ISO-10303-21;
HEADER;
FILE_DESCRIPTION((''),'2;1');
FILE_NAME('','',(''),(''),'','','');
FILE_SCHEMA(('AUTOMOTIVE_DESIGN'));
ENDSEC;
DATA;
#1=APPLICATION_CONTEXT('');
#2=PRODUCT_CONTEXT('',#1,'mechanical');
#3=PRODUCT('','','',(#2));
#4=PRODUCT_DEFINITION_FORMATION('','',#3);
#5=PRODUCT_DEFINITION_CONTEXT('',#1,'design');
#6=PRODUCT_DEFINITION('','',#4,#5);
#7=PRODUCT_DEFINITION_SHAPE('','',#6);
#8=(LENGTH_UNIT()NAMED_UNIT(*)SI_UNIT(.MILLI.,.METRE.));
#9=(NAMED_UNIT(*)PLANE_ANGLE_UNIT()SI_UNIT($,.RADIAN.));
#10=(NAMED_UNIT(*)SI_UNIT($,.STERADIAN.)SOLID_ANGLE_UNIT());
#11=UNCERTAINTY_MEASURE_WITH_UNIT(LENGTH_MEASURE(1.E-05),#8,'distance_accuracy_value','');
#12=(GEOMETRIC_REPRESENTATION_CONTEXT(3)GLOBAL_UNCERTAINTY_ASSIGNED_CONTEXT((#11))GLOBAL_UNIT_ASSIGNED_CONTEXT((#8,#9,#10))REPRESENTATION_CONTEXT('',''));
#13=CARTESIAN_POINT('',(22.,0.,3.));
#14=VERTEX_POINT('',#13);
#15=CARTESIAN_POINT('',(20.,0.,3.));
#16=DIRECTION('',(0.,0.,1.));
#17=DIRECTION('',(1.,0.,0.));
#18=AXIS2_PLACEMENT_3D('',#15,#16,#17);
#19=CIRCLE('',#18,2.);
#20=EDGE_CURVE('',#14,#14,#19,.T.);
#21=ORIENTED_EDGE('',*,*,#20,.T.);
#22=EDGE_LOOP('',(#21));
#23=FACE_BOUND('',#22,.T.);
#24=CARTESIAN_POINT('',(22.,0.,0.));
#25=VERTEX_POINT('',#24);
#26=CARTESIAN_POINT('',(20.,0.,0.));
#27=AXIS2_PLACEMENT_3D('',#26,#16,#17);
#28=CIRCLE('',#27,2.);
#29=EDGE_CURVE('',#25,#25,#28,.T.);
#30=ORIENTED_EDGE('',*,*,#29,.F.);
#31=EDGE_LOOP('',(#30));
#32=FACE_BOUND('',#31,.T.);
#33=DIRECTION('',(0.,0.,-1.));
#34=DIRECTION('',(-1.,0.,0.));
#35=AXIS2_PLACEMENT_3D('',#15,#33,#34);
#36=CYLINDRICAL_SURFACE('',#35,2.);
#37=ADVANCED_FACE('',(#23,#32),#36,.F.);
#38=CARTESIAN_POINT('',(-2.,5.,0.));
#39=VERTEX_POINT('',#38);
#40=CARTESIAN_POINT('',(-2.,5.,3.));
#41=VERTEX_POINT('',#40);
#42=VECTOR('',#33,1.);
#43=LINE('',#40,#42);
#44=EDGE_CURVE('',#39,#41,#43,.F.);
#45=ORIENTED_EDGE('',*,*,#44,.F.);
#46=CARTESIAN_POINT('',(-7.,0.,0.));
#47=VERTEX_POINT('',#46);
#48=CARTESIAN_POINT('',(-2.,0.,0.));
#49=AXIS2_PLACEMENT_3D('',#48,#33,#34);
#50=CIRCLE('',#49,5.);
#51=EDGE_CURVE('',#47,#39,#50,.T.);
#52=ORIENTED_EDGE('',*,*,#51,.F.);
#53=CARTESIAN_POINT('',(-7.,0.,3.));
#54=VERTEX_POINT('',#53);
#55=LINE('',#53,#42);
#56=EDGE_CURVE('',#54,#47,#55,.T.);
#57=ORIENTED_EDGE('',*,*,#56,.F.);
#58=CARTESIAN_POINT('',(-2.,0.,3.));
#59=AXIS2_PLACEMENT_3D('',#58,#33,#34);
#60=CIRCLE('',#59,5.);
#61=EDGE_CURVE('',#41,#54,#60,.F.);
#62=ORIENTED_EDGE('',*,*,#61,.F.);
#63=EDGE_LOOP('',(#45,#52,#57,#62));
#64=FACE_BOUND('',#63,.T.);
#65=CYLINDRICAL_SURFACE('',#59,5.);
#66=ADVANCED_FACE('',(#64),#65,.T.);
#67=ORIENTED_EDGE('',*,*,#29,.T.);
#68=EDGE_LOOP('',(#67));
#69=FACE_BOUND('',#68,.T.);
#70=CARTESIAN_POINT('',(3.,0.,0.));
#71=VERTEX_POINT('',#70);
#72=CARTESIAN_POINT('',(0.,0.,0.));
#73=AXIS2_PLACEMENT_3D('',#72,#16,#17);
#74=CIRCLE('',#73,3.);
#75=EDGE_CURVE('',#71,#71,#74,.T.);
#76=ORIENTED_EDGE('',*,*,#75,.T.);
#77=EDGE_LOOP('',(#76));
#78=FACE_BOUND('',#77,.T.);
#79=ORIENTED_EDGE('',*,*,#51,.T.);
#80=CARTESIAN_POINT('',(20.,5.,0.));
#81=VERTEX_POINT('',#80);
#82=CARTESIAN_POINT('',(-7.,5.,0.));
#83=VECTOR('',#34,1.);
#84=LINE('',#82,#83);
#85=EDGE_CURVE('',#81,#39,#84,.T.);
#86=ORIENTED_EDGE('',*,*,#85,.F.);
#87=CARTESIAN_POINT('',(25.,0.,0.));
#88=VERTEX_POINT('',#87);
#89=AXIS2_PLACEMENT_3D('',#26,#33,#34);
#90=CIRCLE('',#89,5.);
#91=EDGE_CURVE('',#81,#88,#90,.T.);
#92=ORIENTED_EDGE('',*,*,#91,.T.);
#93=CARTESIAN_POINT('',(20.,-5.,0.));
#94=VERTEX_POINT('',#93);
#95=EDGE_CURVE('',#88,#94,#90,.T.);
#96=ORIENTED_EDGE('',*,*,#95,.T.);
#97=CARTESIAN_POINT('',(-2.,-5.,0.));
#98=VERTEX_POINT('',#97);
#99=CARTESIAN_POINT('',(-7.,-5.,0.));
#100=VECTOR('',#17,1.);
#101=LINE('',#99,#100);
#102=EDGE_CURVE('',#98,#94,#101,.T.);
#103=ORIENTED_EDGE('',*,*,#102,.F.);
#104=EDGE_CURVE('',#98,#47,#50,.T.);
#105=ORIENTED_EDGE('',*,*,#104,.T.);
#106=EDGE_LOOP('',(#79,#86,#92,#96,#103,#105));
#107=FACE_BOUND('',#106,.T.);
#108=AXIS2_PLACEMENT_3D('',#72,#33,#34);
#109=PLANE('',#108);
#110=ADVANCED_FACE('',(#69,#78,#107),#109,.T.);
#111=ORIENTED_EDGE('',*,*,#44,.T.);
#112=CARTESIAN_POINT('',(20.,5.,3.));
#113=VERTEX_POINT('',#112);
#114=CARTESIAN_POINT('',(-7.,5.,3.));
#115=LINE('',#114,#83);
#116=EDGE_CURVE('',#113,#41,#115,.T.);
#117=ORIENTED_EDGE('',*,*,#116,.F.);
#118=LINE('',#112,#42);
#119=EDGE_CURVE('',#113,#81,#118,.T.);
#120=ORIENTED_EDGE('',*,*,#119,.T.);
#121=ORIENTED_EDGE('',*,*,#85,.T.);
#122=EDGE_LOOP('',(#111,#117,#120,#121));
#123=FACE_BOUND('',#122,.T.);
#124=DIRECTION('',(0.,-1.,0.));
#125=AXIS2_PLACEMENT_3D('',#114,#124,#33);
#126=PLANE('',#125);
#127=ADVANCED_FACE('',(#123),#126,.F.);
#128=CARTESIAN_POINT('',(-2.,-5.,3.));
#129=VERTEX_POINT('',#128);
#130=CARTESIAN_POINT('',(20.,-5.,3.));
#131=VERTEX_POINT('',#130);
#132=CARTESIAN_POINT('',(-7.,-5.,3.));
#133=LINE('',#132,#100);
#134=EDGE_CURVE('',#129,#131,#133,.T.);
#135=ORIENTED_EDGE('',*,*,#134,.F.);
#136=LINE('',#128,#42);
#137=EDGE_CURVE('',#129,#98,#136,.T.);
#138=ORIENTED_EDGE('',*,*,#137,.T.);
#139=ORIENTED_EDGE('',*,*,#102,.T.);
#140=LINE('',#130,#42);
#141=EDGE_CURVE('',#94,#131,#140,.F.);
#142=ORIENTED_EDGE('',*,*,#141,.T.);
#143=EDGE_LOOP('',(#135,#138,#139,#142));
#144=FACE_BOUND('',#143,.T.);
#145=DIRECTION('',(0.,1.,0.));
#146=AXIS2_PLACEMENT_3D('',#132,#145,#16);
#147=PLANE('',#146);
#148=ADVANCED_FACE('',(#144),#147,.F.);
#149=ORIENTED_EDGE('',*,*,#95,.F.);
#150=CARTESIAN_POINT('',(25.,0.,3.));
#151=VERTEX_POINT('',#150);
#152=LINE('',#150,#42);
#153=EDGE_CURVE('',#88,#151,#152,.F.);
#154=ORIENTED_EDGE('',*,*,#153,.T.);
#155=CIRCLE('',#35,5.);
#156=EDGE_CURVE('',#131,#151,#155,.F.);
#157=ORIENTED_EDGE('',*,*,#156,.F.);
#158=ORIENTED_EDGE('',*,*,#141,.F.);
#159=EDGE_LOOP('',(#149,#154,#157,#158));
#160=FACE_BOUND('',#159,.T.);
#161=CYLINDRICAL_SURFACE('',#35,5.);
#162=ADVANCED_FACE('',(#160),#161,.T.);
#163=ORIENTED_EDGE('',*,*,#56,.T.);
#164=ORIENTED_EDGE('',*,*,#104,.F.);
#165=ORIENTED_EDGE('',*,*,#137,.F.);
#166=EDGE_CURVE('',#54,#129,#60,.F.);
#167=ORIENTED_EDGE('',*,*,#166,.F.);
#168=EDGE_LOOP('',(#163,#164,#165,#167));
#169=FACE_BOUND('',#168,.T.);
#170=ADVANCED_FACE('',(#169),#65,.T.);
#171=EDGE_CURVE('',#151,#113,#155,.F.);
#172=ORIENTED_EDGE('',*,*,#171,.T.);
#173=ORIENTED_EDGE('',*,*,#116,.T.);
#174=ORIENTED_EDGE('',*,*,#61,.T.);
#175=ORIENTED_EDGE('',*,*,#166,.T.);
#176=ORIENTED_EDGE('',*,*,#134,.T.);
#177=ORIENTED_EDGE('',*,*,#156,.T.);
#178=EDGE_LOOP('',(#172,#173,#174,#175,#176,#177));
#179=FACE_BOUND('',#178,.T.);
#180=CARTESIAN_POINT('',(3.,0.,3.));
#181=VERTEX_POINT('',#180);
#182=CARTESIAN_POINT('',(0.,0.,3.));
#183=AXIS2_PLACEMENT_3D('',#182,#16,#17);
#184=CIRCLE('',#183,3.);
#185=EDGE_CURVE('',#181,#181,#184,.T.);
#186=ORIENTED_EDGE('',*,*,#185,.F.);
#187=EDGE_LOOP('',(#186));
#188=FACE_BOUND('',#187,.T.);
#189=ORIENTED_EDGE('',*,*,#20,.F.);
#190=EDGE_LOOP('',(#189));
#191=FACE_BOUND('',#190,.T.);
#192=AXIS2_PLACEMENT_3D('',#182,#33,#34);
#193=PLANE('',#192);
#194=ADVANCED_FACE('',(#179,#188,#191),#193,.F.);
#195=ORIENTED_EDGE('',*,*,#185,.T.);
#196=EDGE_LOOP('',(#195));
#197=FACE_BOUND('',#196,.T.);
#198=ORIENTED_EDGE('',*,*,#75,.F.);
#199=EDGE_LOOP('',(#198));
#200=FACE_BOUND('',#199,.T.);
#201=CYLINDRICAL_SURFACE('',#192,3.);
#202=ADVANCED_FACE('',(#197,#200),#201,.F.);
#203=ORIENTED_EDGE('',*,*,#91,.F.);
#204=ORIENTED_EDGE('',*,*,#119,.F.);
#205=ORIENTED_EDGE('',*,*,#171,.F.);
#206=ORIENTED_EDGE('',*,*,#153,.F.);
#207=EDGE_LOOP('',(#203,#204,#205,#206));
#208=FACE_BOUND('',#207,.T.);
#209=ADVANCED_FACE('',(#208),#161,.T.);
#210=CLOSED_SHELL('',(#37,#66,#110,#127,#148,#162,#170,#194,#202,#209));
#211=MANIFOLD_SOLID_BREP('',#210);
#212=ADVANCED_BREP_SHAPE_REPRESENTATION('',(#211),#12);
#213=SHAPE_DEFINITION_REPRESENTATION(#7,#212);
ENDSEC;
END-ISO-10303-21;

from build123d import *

# Parameters (mm, degrees)
SKETCH_1_W      = 32
SKETCH_1_H      = 10
SKETCH_1_R      = 3
SKETCH_1_R_2    = 2
EXTRUDE_1_DEPTH = 3
FILLET_1_R      = 5


with BuildPart() as part:
    # 草图1 → 凸台-拉伸1 (new body)
    with BuildSketch(Plane.XY):
        with Locations((9, 0)):
            Rectangle(SKETCH_1_W, SKETCH_1_H)
        Circle(SKETCH_1_R, mode=Mode.SUBTRACT)
        with Locations((20, 0)):
            Circle(SKETCH_1_R_2, mode=Mode.SUBTRACT)
    extrude(amount=EXTRUDE_1_DEPTH)

    # 圆角1
    fillet_1_edges = [part.edges().sort_by_distance(p)[0] for p in [
        (25, -5, 1.5),
        (25, 5, 1.5),
        (-7, -5, 1.5),
        (-7, 5, 1.5),
    ]]
    fillet(fillet_1_edges, radius=FILLET_1_R - 0.0001)  # a hair under: the kernel refuses the full size


solid = part.part
